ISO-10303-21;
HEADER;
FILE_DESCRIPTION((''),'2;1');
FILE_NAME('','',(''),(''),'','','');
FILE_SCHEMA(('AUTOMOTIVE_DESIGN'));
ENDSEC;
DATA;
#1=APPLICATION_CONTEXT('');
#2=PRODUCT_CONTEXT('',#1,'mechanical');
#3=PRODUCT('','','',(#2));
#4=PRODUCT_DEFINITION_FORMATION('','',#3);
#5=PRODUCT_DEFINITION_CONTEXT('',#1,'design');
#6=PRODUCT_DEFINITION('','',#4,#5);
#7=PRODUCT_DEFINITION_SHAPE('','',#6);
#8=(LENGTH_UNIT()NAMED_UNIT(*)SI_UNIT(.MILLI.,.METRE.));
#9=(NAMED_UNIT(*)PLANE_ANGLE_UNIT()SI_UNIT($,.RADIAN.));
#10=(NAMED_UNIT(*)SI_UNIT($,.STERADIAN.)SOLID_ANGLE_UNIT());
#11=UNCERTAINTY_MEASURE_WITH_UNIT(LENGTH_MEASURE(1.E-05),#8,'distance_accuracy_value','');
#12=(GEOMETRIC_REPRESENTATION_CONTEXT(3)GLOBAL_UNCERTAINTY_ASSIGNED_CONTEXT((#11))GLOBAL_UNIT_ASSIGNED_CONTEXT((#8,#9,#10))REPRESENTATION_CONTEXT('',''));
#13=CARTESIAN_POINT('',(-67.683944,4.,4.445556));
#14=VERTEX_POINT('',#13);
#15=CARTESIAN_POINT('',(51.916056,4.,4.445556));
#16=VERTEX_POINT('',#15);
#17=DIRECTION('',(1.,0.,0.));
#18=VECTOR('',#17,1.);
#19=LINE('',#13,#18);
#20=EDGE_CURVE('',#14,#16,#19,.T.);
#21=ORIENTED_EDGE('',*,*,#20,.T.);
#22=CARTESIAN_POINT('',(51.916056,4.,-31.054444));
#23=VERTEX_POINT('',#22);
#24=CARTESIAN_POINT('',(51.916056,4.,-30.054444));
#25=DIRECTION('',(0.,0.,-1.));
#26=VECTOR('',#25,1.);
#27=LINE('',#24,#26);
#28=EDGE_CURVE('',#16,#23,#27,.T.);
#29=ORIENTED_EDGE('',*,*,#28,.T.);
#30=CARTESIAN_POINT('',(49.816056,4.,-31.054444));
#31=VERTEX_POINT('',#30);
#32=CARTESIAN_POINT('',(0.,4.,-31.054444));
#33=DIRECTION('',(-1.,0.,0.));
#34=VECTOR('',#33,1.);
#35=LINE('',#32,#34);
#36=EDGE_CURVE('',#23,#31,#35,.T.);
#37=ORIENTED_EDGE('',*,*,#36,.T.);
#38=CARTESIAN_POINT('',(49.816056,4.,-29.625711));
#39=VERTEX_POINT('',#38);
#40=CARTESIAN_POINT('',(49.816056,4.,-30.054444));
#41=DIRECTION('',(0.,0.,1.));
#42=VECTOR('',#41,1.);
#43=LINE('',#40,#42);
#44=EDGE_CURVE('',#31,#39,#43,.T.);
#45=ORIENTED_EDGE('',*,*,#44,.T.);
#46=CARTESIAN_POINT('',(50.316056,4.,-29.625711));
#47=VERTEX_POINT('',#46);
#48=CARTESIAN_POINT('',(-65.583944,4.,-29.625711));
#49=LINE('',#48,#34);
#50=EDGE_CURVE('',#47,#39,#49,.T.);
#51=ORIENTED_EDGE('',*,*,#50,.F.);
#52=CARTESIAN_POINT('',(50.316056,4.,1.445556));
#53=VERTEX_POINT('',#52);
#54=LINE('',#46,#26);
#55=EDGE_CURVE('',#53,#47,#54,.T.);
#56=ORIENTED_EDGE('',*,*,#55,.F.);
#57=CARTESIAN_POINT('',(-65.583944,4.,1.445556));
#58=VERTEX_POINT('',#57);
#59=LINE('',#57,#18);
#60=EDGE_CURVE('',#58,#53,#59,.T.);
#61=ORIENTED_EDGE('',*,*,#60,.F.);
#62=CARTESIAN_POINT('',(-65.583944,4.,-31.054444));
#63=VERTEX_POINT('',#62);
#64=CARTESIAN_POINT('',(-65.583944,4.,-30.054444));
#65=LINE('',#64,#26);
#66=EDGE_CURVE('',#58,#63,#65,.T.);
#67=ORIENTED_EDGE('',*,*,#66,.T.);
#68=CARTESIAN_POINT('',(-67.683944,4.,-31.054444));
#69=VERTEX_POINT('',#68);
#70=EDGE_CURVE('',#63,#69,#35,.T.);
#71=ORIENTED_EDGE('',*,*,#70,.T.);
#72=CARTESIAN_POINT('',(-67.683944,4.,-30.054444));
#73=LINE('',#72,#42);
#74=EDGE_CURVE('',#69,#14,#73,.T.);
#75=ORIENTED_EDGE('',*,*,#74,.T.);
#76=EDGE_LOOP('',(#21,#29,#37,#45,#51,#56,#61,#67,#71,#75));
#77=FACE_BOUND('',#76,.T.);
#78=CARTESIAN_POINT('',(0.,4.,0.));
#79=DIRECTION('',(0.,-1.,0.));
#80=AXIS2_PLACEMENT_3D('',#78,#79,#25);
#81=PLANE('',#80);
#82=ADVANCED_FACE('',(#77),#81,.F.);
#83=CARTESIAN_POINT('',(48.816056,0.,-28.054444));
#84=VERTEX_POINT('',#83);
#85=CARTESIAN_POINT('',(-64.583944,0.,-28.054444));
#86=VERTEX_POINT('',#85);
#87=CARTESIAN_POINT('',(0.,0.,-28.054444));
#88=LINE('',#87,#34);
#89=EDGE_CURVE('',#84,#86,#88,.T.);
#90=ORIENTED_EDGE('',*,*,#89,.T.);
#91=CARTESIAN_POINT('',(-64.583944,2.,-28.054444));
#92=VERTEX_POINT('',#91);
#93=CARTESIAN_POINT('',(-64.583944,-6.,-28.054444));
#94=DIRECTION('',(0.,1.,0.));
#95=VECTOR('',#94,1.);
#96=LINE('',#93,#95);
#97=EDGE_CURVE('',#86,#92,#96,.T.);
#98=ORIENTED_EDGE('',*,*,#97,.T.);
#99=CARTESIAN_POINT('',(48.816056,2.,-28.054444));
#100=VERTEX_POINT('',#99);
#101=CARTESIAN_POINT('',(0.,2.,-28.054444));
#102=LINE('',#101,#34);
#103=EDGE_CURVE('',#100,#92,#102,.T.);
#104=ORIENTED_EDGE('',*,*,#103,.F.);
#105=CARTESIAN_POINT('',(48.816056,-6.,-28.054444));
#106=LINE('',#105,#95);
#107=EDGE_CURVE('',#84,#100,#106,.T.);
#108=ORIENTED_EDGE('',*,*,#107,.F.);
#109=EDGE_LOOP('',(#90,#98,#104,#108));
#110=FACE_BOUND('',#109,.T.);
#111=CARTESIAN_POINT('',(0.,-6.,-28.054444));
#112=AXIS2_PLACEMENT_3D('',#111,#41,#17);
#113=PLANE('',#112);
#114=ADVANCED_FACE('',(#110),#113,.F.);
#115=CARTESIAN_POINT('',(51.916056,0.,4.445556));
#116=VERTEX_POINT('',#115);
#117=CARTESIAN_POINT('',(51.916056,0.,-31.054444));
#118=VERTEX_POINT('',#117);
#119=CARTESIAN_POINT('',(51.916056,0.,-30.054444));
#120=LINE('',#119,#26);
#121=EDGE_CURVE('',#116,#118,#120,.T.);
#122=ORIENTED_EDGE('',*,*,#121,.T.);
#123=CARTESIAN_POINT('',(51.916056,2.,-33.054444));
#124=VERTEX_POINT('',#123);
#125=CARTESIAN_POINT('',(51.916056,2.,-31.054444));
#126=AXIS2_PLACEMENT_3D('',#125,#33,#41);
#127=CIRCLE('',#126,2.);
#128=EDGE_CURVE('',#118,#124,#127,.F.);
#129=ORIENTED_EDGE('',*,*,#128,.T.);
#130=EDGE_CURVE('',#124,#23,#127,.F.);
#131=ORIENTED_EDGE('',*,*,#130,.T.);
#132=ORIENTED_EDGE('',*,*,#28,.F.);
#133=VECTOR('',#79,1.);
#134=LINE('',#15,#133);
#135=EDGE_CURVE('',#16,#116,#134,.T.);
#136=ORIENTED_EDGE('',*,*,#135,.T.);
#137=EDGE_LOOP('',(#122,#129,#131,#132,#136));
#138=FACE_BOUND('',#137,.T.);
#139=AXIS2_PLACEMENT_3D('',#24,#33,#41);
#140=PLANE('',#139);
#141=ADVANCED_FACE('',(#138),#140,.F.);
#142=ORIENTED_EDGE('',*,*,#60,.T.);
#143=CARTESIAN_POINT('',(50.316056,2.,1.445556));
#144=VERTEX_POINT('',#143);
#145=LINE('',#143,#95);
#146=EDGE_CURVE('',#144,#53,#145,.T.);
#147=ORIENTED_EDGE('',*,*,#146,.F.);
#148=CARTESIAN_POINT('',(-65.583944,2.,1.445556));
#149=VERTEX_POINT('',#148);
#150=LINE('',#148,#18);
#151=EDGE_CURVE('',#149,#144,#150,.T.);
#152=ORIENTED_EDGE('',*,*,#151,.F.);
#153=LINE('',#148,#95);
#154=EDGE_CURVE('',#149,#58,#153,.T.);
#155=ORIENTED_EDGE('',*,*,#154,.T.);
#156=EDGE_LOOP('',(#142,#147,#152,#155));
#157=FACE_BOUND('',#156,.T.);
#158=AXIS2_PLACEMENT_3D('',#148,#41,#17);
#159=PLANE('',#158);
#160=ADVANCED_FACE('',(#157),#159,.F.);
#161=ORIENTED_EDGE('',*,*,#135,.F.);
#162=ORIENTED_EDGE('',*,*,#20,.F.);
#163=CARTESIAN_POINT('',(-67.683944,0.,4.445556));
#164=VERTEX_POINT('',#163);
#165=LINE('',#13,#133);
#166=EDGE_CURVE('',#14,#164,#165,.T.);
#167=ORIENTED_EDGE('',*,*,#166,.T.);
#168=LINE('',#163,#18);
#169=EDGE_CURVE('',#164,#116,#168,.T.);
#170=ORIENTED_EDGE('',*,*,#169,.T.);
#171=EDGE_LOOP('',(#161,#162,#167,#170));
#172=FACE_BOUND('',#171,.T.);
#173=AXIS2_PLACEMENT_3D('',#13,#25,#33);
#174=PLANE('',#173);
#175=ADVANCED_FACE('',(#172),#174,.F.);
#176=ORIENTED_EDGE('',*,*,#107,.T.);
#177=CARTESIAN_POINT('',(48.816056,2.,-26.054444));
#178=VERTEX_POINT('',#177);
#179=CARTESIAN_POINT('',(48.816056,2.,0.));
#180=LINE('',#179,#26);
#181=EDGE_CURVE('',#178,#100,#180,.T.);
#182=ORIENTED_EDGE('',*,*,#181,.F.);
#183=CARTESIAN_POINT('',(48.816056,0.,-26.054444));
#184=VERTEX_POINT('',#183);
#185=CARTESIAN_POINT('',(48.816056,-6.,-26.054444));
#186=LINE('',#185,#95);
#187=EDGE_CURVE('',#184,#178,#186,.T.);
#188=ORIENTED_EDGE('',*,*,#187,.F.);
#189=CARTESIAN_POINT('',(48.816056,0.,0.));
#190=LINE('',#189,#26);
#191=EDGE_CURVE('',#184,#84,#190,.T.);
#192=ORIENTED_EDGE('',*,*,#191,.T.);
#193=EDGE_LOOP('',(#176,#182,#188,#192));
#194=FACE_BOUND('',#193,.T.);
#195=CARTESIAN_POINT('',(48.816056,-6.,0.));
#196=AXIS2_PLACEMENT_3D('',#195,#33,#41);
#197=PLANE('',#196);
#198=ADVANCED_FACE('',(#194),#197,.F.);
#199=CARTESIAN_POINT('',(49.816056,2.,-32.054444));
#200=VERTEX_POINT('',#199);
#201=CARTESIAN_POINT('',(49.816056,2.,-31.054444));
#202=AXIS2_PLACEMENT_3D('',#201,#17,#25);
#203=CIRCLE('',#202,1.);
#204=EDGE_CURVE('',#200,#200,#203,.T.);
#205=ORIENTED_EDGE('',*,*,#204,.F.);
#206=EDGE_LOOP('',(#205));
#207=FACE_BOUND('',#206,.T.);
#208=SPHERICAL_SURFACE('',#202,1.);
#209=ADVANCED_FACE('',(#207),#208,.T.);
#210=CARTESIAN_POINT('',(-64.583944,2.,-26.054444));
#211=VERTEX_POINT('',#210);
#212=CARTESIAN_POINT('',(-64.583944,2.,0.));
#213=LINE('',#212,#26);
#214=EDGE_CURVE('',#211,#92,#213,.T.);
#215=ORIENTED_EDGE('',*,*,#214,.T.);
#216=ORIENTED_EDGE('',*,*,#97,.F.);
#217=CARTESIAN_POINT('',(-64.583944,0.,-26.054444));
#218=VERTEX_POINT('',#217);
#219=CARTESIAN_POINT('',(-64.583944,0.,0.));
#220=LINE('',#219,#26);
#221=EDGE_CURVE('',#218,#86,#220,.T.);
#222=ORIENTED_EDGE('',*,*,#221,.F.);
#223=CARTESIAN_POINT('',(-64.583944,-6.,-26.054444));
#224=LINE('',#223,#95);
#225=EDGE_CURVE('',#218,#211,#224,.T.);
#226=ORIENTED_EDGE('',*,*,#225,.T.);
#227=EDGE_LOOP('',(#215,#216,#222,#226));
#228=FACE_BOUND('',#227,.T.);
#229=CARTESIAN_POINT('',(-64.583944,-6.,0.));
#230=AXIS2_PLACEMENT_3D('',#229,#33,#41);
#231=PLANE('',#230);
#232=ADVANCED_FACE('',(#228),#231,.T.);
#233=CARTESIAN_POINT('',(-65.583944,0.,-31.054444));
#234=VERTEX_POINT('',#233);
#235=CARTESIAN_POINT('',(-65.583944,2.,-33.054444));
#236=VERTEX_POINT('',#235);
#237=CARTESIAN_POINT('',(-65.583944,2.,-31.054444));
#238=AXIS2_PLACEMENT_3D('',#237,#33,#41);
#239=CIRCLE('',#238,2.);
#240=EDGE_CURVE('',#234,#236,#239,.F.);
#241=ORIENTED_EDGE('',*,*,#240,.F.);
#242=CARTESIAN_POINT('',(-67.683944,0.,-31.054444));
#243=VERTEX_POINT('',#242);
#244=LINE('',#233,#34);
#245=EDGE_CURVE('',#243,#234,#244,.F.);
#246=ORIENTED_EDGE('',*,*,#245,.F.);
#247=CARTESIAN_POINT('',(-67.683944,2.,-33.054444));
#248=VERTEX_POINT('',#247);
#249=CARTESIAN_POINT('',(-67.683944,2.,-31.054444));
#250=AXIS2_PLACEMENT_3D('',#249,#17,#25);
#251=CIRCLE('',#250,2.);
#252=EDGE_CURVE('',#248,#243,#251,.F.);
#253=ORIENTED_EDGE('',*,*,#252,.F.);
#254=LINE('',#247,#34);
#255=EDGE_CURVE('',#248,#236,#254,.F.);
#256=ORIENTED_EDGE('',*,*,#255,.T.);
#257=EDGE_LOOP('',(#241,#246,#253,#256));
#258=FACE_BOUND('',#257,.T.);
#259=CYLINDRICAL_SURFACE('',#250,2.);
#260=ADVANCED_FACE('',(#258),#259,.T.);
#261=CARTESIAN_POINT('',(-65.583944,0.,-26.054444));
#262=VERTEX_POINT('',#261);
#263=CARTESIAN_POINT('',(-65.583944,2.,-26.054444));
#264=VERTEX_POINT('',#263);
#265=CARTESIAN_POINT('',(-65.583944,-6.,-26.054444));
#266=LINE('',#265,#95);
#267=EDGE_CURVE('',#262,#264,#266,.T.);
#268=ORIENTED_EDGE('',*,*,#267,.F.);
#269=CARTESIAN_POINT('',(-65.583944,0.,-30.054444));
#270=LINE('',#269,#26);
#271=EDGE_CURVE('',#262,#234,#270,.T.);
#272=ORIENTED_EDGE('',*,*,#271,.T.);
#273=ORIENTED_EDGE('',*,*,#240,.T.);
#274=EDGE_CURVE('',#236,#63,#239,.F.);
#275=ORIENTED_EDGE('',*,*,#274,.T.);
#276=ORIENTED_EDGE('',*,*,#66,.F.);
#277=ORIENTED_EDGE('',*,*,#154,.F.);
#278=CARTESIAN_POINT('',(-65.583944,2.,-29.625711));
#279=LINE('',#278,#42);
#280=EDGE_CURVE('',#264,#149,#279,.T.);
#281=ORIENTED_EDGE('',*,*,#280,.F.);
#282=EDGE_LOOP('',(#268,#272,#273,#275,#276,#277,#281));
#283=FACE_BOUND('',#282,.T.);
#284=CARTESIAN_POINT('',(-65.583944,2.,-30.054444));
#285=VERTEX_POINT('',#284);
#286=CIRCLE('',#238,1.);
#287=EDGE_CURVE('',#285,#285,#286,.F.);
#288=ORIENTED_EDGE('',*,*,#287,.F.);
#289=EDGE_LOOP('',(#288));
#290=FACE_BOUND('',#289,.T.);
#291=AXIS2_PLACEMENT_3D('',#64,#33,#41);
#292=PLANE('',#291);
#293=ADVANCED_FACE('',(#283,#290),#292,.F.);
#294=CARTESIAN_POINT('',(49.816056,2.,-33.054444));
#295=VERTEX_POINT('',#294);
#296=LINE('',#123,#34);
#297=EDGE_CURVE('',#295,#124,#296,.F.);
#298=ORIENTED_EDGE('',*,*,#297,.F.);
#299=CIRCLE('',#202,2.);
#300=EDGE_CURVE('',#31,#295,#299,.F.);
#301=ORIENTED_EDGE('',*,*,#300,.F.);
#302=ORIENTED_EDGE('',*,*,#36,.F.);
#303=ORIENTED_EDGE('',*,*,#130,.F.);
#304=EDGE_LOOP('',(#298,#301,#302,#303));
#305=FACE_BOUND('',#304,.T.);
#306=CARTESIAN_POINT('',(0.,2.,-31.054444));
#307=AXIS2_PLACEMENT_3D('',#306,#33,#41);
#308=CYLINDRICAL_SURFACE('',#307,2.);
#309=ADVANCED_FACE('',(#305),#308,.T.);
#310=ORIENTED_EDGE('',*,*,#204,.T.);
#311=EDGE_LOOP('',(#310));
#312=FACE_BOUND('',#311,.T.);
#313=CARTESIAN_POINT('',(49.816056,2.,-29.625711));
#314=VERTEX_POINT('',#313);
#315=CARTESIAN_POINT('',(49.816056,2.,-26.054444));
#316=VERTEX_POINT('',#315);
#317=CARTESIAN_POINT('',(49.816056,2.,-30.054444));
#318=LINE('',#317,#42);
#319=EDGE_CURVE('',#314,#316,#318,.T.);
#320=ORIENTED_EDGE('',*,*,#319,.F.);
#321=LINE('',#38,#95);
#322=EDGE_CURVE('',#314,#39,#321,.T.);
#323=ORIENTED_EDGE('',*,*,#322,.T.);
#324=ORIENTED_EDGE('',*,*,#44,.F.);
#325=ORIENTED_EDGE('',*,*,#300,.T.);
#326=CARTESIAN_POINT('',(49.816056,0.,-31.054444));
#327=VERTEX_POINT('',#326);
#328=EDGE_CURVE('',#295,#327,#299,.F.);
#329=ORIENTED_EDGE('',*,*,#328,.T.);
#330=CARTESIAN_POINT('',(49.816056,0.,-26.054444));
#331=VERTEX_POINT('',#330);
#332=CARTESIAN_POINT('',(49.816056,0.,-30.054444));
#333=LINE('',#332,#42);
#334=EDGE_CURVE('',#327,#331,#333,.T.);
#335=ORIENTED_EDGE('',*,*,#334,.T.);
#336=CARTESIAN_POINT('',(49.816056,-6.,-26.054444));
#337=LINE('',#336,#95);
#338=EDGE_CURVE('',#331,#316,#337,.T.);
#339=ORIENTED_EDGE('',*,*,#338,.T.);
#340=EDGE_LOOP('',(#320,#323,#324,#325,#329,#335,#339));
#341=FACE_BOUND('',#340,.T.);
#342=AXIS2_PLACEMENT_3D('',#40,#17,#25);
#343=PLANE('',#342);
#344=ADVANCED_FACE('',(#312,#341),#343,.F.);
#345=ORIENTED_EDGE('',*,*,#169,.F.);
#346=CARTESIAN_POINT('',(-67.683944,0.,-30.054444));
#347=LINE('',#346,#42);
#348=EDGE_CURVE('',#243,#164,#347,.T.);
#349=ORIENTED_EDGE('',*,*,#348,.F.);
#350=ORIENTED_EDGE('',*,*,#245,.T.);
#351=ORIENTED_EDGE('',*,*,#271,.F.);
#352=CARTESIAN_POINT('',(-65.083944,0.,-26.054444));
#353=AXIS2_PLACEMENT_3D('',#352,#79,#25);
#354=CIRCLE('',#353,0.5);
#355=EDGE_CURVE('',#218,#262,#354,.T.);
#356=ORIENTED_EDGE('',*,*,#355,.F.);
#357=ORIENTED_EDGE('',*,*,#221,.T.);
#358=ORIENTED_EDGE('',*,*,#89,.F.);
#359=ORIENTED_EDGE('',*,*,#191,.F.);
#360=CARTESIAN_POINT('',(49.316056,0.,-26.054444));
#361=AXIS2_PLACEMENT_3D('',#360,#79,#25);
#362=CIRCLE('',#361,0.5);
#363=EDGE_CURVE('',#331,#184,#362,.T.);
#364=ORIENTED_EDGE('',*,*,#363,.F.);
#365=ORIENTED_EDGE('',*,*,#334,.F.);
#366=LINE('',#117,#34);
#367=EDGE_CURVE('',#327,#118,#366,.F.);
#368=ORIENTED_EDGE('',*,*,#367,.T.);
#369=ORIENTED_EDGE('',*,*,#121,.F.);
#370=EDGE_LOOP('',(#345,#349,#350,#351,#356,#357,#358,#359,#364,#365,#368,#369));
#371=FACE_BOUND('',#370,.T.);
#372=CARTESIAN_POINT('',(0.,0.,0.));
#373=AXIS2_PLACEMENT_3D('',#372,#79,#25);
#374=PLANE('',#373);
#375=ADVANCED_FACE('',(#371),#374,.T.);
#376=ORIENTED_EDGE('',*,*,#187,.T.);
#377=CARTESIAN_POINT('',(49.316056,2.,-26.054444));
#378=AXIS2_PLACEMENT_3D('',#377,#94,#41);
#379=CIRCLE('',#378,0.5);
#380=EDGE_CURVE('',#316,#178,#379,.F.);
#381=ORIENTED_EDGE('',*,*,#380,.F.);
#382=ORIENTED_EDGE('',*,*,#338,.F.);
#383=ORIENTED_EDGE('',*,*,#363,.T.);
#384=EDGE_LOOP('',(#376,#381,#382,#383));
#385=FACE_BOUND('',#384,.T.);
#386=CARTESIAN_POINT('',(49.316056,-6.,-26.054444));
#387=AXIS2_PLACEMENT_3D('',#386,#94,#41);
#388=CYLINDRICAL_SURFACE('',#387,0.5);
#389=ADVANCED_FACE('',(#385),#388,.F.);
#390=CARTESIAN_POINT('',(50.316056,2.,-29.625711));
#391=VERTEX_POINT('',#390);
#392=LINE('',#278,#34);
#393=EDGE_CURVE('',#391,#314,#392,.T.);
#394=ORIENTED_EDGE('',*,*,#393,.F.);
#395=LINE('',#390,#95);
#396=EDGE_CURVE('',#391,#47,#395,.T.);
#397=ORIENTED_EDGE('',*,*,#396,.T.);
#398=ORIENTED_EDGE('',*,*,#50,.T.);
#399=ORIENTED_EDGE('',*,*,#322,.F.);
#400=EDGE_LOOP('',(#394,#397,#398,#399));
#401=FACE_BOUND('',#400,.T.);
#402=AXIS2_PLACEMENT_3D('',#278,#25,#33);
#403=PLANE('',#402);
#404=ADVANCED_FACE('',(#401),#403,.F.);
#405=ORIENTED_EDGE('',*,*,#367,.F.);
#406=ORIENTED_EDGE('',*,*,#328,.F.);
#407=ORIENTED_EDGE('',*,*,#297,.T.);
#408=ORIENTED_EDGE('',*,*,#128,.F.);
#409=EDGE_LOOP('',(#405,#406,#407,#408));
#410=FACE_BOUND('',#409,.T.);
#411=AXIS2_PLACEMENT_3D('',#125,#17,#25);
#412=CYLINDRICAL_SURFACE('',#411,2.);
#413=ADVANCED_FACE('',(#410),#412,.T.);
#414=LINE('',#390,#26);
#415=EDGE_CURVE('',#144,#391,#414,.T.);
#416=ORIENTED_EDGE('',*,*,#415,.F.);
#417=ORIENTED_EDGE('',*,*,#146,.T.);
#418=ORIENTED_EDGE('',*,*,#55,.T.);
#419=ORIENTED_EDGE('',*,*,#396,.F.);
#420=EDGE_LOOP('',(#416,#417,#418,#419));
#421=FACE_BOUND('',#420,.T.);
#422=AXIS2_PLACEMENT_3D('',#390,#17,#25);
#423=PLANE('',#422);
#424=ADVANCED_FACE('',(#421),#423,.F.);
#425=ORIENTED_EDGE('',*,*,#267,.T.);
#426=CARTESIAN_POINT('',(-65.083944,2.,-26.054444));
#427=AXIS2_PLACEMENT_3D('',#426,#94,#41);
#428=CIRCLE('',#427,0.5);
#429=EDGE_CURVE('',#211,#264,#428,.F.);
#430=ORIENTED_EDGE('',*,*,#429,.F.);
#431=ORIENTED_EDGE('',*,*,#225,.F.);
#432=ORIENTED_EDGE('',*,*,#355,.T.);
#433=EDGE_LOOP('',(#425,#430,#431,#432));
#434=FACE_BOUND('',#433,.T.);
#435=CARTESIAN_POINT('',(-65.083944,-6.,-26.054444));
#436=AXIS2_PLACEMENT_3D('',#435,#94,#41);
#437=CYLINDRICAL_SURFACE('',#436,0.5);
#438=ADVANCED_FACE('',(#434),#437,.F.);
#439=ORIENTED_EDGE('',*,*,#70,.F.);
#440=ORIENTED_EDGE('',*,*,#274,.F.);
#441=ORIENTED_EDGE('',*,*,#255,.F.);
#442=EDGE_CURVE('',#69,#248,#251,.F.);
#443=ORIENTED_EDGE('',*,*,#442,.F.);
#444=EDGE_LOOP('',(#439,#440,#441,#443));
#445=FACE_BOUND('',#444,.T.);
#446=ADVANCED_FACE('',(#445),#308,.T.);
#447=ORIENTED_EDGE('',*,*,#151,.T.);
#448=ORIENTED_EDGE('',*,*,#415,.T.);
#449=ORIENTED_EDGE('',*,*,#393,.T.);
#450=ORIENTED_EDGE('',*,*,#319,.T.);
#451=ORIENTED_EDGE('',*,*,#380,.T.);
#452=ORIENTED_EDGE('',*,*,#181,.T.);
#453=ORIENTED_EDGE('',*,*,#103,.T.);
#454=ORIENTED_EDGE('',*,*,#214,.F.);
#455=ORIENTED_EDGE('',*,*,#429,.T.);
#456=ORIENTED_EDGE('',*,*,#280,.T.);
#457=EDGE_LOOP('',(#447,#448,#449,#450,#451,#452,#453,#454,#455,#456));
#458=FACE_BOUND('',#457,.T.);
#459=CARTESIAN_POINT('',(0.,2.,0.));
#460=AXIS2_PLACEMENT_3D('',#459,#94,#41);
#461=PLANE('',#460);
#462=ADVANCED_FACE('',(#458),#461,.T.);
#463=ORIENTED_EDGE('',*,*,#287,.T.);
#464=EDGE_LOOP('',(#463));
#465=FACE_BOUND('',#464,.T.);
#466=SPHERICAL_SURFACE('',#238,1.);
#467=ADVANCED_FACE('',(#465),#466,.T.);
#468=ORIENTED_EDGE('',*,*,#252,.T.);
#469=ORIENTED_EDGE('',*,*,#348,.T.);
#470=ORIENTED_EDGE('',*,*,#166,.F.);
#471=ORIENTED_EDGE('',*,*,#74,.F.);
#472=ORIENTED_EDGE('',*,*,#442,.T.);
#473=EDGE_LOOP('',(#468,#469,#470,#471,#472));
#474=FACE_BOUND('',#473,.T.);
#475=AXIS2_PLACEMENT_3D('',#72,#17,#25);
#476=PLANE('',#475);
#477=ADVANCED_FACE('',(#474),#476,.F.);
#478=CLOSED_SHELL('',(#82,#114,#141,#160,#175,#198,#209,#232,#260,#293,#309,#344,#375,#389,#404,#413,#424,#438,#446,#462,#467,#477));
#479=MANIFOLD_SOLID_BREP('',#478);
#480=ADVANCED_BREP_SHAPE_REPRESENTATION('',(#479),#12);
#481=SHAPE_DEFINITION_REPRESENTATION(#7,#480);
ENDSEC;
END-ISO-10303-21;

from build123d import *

# Parameters (mm, degrees)
SALIENTE_EXTRUIR1_DEPTH = 4
CROQUIS4_W              = 113.4
CROQUIS4_H              = 2
CORTAR_EXTRUIR1_DEPTH   = 10
REDONDEO1_R             = 2
CROQUIS5_W              = 115.9
CROQUIS5_H              = 31.071267716
CORTAR_EXTRUIR2_DEPTH   = 2


with BuildPart() as part:
    # Croquis1 → Saliente-Extruir1 (new body)
    with BuildSketch(Plane(origin=(0, 0, 0), x_dir=(1, 0, 0), z_dir=(0, 1, 0))):
        Polygon((-65.583943666, 30.054443615), (49.816056334, 30.054443615), (49.816056334, 33.054443615), (51.916056334, 33.054443615), (51.916056334, 30.054443615), (51.916056334, -4.445556385), (-67.683943666, -4.445556385), (-67.683943666, 30.054443615), (-67.683943666, 33.054443615), (-65.583943666, 33.054443615), align=None)
    extrude(amount=SALIENTE_EXTRUIR1_DEPTH)

    # Croquis4 → Cortar-Extruir1 (cut)
    with BuildSketch(Plane(origin=(0, 4, 0), x_dir=(1, 0, 0), z_dir=(0, 1, 0))):
        with Locations((-7.883943666, 29.054443615)):
            Rectangle(CROQUIS4_W, CROQUIS4_H)
        with BuildLine():
            Line((49.816056334, 26.054443615), (49.816056334, 30.054443615))
            Line((49.816056334, 30.054443615), (48.816056334, 30.054443615))
            Line((48.816056334, 30.054443615), (48.816056334, 28.054443615))
            Line((48.816056334, 28.054443615), (48.816056334, 26.054443615))
            ThreePointArc((48.816056334, 26.054443615), (49.316056334, 25.554443615), (49.816056334, 26.054443615))
        make_face()
        with BuildLine():
            Line((-64.583943666, 28.054443615), (-64.583943666, 30.054443615))
            Line((-64.583943666, 30.054443615), (-65.583943666, 30.054443615))
            Line((-65.583943666, 30.054443615), (-65.583943666, 26.054443615))
            ThreePointArc((-65.583943666, 26.054443615), (-65.083943666, 25.554443615), (-64.583943666, 26.054443615))
            Line((-64.583943666, 26.054443615), (-64.583943666, 28.054443615))
        make_face()
    extrude(amount=-CORTAR_EXTRUIR1_DEPTH, mode=Mode.SUBTRACT)

    # Redondeo1
    redondeo1_edges = [part.edges().sort_by_distance(p)[0] for p in [
        (-66.633943666, 0, -33.054443615),
        (-66.633943666, 4, -33.054443615),
        (50.866056334, 0, -33.054443615),
        (50.866056334, 4, -33.054443615),
    ]]
    fillet(redondeo1_edges, radius=REDONDEO1_R - 0.0001)  # a hair under: the kernel refuses the full size

    # Croquis3 → Revolución1 (revolve)
    with BuildSketch(Plane(origin=(-65.583943666, 0, 0), x_dir=(0, 0, -1), z_dir=(1, 0, 0))):
        with BuildLine():
            Line((32.054443615, 2), (30.054443615, 2))
            ThreePointArc((30.054443615, 2), (31.054443615, 1), (32.054443615, 2))
        make_face()
    revolve(axis=Axis((-65.583943666, 2, -32.054443615), (0, 0, 1)))

    # Croquis2 → Revolución2 (revolve)
    with BuildSketch(Plane.ZY.offset(-49.816056334)):
        with BuildLine():
            Line((-32.054443615, 2), (-30.054443615, 2))
            ThreePointArc((-30.054443615, 2), (-31.054443615, 1), (-32.054443615, 2))
        make_face()
    revolve(axis=Axis((49.816056334, 2, -32.054443615), (0, 0, 1)))

    # Croquis5 → Cortar-Extruir2 (cut)
    with BuildSketch(Plane(origin=(0, 4, 0), x_dir=(1, 0, 0), z_dir=(0, 1, 0))):
        with Locations((-7.633943666, 14.090077473)):
            Rectangle(CROQUIS5_W, CROQUIS5_H)
    extrude(amount=-CORTAR_EXTRUIR2_DEPTH, mode=Mode.SUBTRACT)


solid = part.part
